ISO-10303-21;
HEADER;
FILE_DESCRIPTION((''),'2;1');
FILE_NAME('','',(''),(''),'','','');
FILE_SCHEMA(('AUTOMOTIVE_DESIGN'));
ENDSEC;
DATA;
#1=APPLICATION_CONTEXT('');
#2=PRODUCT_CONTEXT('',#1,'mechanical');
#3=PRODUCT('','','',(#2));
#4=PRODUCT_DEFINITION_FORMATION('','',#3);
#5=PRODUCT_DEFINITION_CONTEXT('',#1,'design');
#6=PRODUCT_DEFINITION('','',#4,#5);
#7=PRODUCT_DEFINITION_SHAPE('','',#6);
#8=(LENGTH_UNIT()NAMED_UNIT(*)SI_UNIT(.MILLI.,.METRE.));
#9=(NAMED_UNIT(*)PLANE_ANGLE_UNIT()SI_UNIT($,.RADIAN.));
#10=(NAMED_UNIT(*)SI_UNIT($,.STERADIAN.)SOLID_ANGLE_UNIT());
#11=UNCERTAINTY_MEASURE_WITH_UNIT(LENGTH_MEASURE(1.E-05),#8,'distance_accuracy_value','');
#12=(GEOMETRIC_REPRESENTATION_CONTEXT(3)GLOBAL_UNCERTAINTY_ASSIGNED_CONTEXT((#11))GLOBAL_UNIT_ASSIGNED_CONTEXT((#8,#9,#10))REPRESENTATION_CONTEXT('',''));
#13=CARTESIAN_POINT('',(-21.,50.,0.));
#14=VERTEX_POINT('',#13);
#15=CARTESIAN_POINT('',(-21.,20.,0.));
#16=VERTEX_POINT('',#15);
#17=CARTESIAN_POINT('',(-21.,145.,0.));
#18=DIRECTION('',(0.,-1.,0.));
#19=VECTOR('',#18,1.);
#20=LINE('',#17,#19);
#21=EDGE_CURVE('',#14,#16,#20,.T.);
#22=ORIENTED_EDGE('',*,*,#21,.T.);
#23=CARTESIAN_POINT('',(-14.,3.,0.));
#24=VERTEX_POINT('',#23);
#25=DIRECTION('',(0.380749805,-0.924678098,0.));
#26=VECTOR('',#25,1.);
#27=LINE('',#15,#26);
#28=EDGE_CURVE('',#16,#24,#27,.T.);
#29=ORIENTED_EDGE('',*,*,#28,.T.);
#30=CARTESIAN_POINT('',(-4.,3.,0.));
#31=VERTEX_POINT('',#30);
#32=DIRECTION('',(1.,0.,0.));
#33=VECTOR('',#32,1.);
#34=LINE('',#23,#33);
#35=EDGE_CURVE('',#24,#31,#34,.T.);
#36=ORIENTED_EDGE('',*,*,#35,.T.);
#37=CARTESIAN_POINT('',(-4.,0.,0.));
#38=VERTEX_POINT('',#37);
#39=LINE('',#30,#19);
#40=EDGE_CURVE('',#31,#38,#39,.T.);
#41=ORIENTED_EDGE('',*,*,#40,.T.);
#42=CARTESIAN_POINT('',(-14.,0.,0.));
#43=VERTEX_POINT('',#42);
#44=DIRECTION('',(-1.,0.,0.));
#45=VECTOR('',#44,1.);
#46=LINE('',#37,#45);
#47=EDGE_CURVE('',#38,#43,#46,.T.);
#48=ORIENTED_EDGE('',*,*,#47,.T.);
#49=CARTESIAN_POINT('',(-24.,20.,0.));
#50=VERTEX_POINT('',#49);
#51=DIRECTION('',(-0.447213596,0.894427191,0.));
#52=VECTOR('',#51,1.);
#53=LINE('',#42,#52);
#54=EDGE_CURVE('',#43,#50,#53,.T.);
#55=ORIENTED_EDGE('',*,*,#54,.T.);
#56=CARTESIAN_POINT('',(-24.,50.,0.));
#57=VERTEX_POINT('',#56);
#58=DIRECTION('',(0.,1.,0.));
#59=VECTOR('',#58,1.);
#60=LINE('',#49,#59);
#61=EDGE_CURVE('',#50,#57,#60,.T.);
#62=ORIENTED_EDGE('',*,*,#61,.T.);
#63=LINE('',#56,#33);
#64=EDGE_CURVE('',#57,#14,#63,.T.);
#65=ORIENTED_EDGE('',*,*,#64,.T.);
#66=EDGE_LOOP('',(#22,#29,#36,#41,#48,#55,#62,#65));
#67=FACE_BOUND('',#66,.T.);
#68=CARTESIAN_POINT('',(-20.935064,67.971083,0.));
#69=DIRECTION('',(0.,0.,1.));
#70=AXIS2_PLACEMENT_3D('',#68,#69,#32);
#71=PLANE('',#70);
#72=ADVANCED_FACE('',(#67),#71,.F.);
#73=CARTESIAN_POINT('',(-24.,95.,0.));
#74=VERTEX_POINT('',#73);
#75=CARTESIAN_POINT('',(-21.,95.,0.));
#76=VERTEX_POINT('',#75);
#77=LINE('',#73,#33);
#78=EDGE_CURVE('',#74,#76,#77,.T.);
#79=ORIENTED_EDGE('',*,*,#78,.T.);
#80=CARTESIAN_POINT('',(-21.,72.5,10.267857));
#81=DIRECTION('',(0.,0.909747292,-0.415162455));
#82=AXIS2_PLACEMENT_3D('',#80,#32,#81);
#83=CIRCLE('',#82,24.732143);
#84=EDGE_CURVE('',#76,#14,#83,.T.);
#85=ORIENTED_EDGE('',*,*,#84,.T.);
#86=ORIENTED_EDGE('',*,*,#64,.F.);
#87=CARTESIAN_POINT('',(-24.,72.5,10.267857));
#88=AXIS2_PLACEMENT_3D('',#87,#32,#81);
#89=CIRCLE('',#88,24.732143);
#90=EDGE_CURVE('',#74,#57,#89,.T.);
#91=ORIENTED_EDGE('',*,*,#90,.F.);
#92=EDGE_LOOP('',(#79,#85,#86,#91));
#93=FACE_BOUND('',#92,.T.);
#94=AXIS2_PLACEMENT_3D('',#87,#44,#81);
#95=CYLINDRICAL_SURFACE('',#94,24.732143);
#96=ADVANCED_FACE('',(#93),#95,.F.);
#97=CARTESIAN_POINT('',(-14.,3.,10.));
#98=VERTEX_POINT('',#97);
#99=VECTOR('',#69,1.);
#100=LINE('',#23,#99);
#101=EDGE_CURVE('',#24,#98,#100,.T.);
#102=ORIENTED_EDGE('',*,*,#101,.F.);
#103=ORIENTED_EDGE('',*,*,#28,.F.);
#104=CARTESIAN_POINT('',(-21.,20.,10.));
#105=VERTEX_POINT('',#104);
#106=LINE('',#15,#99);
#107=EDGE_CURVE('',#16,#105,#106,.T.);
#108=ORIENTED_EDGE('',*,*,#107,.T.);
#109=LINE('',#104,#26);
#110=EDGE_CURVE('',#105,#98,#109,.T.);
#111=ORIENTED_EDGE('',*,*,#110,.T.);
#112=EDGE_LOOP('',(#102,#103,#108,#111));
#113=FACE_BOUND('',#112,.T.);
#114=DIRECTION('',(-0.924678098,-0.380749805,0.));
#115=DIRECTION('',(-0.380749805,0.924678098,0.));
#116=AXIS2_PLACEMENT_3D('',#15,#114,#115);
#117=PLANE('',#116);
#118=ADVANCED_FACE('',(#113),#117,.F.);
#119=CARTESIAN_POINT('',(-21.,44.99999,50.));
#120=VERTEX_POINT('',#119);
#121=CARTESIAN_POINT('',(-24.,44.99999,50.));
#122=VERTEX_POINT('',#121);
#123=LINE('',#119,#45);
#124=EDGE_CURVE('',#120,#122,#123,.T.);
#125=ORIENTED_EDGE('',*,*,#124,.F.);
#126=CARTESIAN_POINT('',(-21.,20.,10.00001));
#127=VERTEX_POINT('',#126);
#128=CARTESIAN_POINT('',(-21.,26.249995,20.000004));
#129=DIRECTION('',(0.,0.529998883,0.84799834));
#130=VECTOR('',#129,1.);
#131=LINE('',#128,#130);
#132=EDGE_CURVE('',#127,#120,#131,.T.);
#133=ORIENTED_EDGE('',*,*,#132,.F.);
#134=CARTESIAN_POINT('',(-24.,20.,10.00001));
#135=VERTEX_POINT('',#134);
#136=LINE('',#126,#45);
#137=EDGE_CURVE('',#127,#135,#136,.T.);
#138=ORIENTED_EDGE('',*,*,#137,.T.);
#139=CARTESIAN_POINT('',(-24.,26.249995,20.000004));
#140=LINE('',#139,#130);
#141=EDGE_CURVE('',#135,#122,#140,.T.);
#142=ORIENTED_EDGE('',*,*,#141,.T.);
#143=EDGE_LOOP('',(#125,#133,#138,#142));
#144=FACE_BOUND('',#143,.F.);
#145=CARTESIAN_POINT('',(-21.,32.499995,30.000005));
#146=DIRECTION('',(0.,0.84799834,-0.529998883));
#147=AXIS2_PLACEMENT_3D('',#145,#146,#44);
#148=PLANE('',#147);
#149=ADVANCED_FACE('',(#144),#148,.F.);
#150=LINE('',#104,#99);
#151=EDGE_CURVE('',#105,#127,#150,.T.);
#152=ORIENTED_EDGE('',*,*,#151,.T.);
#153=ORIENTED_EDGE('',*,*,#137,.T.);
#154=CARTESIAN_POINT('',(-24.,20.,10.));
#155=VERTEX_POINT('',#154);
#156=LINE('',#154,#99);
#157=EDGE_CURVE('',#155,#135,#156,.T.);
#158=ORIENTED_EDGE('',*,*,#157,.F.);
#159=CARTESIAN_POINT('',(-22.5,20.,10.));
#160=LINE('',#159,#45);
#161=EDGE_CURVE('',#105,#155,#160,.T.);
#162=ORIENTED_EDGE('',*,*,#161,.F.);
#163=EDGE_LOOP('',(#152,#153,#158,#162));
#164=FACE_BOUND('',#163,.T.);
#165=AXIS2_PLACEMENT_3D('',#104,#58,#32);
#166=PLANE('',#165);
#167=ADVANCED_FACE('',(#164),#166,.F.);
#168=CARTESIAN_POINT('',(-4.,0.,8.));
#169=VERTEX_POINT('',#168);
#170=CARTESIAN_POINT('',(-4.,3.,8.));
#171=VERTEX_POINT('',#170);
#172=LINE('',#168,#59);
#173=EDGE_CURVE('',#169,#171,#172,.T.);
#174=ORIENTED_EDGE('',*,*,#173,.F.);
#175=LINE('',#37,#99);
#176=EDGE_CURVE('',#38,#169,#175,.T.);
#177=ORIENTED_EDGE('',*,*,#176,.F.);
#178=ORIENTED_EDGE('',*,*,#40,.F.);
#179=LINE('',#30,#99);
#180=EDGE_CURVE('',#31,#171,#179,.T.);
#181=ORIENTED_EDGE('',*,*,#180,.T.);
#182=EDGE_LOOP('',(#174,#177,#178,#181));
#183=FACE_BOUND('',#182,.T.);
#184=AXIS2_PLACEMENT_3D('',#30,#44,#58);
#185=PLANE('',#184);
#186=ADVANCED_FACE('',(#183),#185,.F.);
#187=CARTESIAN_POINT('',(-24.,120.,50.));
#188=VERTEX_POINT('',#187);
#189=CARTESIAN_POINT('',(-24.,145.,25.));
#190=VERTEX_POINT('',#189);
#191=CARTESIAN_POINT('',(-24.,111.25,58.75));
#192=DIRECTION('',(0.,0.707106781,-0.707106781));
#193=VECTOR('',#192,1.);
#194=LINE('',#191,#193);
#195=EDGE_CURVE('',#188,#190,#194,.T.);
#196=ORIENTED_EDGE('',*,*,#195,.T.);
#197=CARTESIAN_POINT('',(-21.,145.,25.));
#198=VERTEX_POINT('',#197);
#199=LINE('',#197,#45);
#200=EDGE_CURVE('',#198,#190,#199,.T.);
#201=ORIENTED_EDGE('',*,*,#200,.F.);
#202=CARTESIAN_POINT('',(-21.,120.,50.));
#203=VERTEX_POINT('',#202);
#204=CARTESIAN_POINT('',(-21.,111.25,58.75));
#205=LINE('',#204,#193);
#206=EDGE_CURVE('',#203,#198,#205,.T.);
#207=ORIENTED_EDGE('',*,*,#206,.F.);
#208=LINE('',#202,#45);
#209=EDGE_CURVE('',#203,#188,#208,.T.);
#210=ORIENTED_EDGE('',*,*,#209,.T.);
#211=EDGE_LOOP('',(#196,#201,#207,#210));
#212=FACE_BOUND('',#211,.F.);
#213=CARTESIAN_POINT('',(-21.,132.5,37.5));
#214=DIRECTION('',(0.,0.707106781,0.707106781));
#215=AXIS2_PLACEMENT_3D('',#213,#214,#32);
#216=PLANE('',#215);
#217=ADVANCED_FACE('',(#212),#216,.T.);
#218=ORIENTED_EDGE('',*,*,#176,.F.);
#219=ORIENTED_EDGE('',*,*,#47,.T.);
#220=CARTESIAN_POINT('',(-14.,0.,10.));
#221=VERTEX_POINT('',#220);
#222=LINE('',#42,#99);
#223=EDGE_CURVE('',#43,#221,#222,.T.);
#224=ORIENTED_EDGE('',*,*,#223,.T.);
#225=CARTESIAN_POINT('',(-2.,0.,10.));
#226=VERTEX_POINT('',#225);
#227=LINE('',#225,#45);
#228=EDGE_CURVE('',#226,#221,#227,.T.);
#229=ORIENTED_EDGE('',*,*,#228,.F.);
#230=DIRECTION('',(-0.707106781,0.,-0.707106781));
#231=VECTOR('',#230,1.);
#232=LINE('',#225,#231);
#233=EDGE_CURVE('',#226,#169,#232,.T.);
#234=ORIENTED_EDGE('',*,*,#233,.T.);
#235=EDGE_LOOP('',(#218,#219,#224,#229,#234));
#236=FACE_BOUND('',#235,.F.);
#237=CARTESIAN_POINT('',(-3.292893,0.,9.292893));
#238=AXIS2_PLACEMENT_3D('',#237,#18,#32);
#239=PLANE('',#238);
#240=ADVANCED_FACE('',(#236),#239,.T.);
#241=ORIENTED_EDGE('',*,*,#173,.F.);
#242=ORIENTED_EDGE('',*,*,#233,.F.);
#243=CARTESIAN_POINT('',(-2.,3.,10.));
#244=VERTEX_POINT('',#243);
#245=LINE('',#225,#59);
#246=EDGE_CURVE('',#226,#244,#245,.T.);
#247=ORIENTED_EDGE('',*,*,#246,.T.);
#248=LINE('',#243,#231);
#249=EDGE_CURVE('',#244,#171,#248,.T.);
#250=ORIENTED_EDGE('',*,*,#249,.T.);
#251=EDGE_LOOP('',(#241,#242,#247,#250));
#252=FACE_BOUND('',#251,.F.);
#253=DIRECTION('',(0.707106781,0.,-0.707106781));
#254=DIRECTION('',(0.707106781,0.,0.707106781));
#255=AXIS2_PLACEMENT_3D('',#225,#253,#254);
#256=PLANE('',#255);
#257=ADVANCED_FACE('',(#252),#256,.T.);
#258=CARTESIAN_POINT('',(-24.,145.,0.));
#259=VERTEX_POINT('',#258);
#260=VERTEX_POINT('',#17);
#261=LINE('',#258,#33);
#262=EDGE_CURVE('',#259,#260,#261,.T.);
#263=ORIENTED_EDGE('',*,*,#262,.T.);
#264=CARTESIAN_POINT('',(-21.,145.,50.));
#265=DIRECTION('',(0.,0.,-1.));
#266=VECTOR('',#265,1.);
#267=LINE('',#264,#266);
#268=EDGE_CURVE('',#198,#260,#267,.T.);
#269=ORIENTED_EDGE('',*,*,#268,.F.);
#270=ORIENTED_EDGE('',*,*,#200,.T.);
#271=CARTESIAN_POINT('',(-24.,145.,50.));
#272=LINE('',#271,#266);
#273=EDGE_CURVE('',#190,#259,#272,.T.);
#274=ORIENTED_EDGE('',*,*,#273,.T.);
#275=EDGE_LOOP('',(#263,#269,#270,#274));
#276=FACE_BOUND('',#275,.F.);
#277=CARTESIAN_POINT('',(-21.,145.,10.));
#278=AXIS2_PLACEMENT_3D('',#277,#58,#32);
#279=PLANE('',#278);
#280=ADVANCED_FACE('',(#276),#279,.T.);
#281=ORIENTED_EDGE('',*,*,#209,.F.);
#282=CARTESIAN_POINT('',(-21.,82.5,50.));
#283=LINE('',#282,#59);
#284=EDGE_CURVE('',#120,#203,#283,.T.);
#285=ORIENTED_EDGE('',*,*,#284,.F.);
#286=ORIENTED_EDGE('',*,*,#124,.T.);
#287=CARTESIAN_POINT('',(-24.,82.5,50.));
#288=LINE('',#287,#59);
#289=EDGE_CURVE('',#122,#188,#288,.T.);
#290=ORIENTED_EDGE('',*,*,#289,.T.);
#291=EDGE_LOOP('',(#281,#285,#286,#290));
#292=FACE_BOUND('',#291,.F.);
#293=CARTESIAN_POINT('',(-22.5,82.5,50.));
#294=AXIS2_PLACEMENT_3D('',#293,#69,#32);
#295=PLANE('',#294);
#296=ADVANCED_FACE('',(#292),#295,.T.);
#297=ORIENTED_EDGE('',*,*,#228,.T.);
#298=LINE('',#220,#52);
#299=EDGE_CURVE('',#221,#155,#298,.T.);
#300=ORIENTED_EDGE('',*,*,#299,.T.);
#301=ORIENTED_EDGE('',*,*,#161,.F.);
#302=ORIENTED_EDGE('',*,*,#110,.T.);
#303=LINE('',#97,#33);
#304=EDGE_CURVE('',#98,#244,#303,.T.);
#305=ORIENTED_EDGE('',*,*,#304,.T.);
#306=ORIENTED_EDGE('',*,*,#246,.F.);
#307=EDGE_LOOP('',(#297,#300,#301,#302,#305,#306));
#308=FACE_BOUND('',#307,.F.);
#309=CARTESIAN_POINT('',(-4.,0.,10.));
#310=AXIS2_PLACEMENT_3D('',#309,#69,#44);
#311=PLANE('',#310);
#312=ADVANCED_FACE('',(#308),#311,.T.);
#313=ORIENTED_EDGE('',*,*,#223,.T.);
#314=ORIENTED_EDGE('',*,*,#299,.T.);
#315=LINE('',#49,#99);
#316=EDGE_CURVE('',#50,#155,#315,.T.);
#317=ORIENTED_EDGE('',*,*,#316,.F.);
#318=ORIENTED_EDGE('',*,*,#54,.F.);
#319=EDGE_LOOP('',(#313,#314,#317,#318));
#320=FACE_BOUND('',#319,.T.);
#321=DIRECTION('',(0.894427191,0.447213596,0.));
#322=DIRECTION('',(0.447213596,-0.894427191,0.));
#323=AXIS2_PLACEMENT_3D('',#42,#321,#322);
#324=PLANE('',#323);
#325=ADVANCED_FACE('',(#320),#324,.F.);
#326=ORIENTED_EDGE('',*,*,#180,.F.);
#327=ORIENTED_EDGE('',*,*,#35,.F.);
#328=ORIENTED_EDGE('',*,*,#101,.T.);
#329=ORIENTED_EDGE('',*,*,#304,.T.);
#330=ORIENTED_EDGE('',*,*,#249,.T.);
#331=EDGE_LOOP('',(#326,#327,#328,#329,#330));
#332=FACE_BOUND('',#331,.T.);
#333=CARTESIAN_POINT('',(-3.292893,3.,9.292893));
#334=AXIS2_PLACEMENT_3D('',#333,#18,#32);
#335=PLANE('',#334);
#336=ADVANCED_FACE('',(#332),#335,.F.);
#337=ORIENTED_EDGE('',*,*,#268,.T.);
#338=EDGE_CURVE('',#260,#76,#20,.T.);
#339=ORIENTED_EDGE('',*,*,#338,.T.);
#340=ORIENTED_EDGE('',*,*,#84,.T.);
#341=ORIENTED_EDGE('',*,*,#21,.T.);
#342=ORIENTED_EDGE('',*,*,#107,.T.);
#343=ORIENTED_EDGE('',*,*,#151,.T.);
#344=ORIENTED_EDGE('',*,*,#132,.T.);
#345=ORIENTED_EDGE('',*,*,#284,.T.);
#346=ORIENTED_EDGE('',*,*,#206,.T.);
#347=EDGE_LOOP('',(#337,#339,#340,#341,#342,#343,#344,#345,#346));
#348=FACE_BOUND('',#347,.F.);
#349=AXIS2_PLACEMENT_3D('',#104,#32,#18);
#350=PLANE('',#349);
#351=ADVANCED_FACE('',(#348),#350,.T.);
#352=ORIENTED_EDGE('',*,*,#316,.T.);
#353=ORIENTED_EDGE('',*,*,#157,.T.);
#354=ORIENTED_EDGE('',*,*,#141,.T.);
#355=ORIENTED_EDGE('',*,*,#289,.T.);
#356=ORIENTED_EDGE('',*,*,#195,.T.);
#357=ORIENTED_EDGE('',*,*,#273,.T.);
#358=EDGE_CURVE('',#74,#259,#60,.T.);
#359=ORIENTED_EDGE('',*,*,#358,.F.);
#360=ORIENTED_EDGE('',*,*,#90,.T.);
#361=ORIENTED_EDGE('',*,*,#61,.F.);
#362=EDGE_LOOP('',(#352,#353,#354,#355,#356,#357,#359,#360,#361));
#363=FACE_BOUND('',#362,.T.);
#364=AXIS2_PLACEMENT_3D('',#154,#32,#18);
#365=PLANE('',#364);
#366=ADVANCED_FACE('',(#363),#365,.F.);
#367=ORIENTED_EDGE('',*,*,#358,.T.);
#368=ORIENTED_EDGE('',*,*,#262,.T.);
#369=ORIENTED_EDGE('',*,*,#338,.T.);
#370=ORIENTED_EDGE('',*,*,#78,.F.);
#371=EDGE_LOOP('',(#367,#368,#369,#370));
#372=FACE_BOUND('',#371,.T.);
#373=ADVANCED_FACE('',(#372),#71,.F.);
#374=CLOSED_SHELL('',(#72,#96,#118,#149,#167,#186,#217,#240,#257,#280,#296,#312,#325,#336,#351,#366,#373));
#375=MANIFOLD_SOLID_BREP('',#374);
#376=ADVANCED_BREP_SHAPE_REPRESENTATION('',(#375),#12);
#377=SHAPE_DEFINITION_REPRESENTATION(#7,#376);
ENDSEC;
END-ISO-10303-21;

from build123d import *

# Parameters (mm, degrees)
F1_DEPTH = 10
F3_DEPTH = 3
F4_W     = 3
F4_H     = 125
F5_DEPTH = 40
F6_SIZE2 = 24.99999
F6_SIZE  = 39.99999
F7_SIZE  = 25
F9_DEPTH = 25


# Not quite as in the source:
# - a fillet or chamfer is up to 0.001 mm smaller than in the source, because OpenCascade refuses the exact size


with BuildPart() as f1:
    # F0 (on Top) → F1 (new body)
    with BuildSketch(Plane.XY):
        Polygon((0, 3), (0, 0), (10, 0), (20, 20), (20, 145), (17, 145), (17, 20), (10, 3), align=None)
    extrude(amount=F1_DEPTH)

    # F2 (on Front) → F3 (join)
    with BuildSketch(Plane.XZ):
        Polygon((0, 8), (0, 10), (-2, 10), align=None)
    extrude(amount=-F3_DEPTH)

    # F4 (on face) → F5 (join)
    with BuildSketch(Plane.XY.offset(10)):
        with Locations((18.5, 82.5)):
            Rectangle(F4_W, F4_H)
    extrude(amount=F5_DEPTH)

    # F6 (size 40 and 25 in the source; OpenCascade refuses exactly that, so slightly less here)
    f6_edges = [f1.edges().sort_by_distance(p)[0] for p in [
        (18.5, 20, 50),
    ]]
    f6_side = f1.faces().sort_by_distance((18.5, 20, 30))[0]
    chamfer(f6_edges, length=F6_SIZE, length2=F6_SIZE2, reference=f6_side)

    # F7
    f7_edges = [f1.edges().sort_by_distance(p)[0] for p in [
        (18.5, 145, 50),
    ]]
    chamfer(f7_edges, length=F7_SIZE)

    # F8 (on face) → F9 (cut)
    with BuildSketch(Plane.YZ.offset(20)):
        with BuildLine():
            Line((50, 0), (95, 0))
            ThreePointArc((95, 0), (72.5, 35), (50, 0))
        make_face()
    extrude(amount=-F9_DEPTH, mode=Mode.SUBTRACT)


with BuildPart() as f11_1:
    # F11: instance of F1
    add(f1.part.mirror(Plane.YZ.offset(-2)))


solid = f11_1.part
